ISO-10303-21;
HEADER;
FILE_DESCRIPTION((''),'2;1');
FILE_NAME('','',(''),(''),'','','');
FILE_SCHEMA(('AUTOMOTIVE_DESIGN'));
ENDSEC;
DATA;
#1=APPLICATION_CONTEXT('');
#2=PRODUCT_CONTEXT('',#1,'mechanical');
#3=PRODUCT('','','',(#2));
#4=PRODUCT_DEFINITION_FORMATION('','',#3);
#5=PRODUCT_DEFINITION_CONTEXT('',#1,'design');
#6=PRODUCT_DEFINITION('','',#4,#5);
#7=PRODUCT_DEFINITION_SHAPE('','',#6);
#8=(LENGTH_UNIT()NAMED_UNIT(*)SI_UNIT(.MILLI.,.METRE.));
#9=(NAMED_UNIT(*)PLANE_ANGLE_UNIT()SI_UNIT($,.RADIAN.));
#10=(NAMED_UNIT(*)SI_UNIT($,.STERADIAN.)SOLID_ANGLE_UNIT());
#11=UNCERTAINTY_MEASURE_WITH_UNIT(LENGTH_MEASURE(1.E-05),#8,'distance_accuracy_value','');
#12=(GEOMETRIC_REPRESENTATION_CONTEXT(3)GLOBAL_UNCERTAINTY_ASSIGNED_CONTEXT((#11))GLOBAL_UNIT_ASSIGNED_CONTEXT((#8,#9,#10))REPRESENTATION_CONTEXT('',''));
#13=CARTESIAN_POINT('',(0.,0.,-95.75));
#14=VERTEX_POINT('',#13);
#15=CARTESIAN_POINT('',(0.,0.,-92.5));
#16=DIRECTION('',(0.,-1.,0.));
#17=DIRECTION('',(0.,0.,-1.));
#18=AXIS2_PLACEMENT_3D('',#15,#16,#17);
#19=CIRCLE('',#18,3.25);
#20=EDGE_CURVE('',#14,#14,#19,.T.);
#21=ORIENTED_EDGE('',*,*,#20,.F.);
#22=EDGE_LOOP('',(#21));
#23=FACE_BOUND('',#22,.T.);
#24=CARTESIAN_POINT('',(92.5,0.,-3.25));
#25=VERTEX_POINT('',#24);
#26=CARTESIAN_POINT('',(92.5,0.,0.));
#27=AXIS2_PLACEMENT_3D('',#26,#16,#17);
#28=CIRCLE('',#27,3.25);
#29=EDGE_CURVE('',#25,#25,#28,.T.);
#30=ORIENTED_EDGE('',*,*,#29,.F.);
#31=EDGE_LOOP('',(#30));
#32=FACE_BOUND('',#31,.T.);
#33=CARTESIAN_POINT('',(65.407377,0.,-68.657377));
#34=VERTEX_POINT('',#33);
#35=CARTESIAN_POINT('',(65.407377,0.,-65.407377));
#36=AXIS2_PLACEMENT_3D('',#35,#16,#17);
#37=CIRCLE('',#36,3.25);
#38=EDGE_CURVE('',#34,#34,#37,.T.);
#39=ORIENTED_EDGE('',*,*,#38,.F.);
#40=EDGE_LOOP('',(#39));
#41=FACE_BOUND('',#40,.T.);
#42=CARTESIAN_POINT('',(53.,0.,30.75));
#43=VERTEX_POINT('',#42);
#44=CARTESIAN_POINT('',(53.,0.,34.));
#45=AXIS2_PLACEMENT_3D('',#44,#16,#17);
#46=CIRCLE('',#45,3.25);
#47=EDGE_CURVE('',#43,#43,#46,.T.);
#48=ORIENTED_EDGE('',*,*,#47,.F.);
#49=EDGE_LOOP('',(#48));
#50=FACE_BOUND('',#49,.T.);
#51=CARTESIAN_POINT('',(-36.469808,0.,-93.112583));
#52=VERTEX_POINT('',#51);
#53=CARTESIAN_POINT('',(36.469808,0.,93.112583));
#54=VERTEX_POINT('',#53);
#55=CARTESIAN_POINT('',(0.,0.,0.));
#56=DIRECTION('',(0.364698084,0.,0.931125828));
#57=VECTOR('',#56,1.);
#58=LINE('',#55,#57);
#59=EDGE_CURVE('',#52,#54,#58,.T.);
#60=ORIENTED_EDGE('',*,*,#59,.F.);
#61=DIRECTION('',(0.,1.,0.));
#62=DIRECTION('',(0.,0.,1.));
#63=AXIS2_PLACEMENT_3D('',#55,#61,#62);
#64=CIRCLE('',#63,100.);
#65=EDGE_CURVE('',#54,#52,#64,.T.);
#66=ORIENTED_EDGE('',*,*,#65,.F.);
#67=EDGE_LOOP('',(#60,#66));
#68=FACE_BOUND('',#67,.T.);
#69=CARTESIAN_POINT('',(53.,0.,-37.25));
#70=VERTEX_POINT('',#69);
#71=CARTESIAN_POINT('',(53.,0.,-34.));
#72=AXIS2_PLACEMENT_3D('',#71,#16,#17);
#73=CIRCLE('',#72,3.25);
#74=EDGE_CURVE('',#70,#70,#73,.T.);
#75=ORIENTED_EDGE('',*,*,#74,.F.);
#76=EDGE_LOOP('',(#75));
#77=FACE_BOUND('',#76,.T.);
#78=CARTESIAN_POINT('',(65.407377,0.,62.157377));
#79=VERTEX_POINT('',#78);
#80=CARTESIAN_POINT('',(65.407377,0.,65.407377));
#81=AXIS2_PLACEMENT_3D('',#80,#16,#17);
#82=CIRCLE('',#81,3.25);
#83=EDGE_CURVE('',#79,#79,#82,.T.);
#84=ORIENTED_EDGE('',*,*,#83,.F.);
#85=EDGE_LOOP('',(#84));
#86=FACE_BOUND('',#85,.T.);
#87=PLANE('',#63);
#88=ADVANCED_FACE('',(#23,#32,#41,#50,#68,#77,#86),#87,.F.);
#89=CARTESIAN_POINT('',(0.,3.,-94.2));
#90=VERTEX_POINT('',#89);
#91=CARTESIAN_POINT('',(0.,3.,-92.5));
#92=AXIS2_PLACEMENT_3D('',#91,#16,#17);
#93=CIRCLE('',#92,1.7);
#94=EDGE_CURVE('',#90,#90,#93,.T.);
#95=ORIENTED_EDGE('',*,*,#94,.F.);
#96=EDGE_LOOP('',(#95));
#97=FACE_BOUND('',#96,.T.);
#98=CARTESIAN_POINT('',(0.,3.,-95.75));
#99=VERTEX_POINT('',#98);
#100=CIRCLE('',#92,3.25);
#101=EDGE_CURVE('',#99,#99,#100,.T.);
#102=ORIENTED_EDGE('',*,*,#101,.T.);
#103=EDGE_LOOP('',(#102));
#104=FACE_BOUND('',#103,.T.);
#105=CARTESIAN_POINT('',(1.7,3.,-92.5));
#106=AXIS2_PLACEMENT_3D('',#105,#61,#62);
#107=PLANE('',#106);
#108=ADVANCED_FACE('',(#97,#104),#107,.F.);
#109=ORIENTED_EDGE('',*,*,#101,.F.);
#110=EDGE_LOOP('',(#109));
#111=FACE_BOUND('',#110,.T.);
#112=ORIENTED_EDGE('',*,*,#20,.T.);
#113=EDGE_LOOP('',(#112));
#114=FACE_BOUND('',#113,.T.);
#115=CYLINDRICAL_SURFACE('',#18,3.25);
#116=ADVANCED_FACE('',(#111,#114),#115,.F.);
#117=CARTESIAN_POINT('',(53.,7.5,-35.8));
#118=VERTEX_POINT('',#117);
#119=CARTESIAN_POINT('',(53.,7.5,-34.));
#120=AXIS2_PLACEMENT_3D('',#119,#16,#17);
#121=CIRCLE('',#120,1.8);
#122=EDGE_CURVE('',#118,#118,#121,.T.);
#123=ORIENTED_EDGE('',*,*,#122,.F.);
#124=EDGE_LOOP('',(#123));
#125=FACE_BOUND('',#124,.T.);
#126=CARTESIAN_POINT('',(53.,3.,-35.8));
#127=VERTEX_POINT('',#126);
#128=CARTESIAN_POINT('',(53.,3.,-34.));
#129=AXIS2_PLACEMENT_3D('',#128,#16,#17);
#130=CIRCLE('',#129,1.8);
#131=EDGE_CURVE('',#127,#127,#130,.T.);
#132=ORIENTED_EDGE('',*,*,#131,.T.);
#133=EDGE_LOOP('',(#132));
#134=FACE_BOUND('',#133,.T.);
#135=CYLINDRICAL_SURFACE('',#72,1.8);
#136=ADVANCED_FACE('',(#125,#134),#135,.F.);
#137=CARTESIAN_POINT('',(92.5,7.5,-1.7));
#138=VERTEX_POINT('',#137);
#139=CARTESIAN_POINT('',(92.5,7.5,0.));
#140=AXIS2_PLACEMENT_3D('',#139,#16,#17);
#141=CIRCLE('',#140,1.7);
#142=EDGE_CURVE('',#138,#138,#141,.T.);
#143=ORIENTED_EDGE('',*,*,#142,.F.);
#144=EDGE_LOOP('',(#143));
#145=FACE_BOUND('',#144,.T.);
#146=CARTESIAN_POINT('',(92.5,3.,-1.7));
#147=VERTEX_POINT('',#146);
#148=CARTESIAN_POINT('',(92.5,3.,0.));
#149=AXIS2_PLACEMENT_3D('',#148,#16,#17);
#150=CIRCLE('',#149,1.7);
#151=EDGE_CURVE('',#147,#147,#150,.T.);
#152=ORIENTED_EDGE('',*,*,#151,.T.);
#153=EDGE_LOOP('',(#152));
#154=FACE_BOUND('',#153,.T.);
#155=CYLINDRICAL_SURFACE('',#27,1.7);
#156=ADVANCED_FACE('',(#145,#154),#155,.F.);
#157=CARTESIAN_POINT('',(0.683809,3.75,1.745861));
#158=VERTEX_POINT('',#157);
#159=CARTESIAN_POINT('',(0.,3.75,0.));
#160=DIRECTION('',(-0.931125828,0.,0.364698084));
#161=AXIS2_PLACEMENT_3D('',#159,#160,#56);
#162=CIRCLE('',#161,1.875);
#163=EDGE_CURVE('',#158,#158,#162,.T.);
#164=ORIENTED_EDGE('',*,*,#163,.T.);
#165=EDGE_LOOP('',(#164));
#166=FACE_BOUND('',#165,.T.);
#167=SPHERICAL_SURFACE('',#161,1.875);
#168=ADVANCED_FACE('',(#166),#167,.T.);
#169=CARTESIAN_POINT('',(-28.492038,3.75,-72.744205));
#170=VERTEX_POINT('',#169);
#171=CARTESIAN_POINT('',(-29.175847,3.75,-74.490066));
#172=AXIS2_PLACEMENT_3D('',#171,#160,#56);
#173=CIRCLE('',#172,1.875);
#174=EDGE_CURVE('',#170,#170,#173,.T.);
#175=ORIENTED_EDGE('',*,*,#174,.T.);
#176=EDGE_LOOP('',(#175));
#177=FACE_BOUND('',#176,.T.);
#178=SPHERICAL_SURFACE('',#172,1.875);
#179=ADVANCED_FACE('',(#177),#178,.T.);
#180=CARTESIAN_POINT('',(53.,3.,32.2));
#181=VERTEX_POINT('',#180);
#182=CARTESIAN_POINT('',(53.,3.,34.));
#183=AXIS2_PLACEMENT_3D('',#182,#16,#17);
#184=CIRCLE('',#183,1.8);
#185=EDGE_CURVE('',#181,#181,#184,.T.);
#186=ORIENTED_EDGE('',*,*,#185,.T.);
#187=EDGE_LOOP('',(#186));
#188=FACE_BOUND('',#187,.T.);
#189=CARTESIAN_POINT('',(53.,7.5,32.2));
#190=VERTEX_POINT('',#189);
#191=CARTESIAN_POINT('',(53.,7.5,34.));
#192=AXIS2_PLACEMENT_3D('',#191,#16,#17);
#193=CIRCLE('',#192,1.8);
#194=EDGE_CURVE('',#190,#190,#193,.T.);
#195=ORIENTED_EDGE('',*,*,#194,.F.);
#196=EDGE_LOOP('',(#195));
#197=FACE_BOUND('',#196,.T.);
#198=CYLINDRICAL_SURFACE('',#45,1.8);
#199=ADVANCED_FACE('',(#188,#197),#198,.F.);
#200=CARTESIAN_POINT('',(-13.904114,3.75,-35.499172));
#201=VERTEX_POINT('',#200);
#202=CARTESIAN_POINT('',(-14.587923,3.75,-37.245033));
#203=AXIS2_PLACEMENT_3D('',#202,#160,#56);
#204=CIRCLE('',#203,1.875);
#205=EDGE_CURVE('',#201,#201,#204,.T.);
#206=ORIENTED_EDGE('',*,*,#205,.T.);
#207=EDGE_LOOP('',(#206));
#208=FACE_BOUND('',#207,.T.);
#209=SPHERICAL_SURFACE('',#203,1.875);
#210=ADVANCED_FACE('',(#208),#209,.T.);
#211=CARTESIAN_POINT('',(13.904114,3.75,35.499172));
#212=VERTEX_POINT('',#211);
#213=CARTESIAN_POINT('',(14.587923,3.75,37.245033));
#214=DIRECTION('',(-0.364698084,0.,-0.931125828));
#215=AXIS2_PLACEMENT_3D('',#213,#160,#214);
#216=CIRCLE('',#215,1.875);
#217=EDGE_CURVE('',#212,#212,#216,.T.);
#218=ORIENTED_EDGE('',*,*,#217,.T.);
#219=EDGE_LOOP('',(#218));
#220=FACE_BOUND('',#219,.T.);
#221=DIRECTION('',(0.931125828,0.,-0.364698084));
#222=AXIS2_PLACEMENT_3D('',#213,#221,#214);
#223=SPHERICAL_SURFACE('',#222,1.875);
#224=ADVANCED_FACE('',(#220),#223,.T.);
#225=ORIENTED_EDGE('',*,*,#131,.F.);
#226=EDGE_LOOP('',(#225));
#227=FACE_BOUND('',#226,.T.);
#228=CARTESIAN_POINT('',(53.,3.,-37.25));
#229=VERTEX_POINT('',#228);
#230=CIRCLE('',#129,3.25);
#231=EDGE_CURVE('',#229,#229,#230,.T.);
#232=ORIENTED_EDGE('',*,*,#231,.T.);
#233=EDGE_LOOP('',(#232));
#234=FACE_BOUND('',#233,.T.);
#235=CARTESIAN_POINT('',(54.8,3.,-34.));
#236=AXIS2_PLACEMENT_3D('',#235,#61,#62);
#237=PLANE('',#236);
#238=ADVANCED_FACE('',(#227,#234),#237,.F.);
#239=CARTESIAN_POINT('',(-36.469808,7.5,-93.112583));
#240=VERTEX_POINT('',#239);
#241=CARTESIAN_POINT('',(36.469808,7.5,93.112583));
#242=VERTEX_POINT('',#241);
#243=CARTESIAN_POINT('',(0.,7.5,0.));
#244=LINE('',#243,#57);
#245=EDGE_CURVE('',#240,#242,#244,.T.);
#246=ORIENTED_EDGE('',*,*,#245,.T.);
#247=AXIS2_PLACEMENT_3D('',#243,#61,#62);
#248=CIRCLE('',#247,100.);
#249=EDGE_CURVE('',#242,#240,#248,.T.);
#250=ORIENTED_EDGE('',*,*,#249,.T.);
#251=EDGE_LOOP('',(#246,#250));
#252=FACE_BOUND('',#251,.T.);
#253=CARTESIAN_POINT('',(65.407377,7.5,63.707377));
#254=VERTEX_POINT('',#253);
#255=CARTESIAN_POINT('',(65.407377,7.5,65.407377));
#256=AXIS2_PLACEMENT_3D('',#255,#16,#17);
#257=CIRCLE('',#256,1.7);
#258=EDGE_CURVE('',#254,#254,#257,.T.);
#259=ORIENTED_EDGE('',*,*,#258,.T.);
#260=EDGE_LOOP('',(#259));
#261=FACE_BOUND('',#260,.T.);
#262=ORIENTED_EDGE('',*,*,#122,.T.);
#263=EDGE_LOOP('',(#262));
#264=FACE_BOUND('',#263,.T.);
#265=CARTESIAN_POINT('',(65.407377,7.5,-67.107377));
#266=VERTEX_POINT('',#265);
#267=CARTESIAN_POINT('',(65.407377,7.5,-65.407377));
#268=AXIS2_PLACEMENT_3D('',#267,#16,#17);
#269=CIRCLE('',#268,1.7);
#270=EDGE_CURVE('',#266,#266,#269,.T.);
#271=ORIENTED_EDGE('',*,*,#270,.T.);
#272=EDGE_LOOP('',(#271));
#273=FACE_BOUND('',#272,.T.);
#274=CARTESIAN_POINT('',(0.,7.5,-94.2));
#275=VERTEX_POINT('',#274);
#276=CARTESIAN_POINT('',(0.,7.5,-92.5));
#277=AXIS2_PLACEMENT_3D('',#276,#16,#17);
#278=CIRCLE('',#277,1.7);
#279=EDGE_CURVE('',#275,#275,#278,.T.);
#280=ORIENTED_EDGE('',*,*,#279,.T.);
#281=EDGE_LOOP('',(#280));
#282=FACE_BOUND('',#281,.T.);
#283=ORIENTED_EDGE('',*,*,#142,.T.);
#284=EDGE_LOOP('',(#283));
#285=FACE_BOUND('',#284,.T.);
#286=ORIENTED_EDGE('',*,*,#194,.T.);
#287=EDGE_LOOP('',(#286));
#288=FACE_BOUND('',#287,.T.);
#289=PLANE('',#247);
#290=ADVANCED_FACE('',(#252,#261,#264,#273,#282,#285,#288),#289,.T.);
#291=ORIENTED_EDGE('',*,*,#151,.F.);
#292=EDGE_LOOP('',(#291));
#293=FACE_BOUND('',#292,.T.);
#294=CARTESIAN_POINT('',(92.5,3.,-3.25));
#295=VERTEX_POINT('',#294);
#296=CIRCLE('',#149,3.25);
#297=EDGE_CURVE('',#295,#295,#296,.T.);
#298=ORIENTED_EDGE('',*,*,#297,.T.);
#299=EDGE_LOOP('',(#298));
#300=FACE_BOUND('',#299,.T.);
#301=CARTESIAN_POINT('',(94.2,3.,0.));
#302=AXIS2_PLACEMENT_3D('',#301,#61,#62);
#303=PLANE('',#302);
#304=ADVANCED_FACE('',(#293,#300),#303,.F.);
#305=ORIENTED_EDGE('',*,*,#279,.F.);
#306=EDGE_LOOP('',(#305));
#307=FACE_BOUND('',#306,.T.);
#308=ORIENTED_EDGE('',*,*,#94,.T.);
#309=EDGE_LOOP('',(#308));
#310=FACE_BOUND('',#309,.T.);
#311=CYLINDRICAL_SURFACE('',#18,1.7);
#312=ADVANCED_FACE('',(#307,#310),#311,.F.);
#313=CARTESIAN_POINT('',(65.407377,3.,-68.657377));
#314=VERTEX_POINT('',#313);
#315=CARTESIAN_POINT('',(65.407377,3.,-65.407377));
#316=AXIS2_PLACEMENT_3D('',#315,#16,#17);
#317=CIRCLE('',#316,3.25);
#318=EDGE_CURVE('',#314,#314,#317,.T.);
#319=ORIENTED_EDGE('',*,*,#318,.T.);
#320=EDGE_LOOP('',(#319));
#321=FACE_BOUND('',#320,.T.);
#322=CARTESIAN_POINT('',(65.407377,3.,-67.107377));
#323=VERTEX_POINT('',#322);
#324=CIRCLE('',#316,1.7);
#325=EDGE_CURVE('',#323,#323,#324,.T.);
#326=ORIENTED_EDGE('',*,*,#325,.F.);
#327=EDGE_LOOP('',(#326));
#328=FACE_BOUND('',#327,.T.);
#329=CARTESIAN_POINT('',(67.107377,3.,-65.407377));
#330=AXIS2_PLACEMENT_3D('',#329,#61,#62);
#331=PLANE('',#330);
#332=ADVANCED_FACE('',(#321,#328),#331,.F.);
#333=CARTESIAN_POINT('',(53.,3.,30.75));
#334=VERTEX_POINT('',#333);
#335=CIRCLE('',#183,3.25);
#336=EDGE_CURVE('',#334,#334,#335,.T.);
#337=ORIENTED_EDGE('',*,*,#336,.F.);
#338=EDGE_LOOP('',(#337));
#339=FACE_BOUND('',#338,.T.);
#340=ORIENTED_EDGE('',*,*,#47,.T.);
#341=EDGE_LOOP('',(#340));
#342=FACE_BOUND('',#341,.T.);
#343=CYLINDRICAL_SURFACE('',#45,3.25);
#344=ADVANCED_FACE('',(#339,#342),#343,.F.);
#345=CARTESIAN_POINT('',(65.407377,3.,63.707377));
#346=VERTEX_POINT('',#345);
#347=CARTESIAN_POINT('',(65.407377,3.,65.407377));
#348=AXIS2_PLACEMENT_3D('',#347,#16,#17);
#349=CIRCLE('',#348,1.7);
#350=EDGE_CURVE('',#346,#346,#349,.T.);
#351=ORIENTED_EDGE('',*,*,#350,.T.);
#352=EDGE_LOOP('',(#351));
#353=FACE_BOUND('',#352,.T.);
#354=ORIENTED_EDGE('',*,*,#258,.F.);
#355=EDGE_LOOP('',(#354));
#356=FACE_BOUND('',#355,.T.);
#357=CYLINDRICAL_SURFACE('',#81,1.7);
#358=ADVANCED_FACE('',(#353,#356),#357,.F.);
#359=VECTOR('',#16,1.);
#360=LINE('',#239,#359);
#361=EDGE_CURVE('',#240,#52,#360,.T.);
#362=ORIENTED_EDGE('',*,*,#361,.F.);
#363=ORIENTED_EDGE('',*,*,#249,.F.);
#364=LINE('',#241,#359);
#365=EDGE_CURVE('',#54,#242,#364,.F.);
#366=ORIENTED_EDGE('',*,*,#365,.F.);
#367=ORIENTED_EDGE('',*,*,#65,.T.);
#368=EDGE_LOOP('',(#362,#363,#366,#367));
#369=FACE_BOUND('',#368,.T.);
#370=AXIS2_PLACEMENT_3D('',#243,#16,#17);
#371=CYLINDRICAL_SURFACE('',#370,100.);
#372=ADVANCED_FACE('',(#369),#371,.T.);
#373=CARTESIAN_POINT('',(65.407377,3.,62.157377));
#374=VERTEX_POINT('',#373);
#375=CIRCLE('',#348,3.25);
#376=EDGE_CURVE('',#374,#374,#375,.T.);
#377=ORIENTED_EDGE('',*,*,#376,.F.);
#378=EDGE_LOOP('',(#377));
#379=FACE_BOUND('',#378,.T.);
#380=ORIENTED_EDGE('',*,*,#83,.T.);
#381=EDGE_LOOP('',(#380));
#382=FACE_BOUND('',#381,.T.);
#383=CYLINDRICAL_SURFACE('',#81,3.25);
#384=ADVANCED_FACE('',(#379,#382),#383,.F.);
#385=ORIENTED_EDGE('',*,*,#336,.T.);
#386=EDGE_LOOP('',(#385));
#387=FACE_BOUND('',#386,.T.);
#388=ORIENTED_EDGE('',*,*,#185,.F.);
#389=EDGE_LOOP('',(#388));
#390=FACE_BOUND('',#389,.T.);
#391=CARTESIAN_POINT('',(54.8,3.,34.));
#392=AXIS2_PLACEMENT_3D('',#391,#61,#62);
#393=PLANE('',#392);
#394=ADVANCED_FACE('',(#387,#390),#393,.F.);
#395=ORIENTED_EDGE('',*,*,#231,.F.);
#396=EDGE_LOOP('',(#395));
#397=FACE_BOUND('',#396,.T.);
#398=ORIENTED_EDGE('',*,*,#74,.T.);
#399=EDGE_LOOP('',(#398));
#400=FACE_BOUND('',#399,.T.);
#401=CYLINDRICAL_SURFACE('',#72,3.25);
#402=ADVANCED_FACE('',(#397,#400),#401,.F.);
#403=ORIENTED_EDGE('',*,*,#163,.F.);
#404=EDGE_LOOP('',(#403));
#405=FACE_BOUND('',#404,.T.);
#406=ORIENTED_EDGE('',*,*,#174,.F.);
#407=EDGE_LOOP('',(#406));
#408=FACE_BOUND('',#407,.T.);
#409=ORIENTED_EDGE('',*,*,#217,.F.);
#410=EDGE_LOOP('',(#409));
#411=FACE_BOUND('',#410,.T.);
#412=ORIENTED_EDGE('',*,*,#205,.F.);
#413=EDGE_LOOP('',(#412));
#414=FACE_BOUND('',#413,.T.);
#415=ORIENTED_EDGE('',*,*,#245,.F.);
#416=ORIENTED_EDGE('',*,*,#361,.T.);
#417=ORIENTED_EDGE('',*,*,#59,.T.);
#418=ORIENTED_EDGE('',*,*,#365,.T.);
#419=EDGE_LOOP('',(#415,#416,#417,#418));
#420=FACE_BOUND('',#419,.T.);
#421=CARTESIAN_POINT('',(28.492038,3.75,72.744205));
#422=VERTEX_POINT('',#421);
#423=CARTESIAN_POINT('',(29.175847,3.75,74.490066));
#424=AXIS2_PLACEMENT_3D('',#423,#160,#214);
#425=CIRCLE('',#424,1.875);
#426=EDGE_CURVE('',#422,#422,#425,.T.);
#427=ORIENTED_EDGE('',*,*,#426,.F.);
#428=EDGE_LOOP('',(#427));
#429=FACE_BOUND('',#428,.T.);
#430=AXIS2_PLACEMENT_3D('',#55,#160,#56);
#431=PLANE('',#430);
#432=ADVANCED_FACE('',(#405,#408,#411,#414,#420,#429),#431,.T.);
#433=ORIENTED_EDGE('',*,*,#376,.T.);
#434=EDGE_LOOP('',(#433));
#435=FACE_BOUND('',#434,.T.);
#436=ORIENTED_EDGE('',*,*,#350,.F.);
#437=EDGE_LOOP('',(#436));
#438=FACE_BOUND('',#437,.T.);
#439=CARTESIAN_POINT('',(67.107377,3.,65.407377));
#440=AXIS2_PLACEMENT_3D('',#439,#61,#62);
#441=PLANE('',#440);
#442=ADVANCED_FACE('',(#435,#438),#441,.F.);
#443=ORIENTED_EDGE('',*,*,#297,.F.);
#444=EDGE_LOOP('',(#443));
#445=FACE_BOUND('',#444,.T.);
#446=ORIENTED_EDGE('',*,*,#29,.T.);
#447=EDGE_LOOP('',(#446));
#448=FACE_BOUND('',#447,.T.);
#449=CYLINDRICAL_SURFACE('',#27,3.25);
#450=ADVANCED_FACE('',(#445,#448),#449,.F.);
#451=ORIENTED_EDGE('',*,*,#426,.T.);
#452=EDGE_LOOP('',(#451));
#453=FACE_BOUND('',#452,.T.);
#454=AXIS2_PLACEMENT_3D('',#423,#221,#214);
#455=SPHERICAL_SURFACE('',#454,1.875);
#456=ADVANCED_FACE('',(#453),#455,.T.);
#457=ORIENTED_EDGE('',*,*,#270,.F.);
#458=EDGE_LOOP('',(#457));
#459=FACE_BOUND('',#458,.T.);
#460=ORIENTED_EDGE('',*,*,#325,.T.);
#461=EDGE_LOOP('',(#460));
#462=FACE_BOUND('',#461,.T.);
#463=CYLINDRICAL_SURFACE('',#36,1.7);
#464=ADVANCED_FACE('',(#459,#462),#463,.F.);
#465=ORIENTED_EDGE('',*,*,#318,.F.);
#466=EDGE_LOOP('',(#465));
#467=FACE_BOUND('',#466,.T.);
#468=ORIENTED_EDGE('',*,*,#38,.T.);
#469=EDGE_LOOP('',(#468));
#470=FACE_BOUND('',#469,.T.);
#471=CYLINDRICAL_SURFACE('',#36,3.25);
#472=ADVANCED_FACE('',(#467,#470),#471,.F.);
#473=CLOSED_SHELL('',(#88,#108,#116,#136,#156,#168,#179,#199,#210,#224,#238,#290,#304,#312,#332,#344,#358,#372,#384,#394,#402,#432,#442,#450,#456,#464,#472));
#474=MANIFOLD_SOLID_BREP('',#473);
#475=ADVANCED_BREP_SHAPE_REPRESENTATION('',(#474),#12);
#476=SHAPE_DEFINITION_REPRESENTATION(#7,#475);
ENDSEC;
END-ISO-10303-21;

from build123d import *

# Parameters (mm, degrees)
SKETCH1_R                      = 100
BOSS_EXTRUDE1_DEPTH            = 7.5
CBORE_FOR_M3_SHCS1_D           = 3.4
CBORE_FOR_M3_SHCS1_DEPTH       = 7.5
CBORE_FOR_M3_SHCS1_CBORE_D     = 6.5
CBORE_FOR_M3_SHCS1_CBORE_DEPTH = 3
CBORE_FOR_M3_SHCS1_TIP         = 1.021463052
CBORE_FOR_M3_SHCS2_D           = 3.6
CBORE_FOR_M3_SHCS2_DEPTH       = 7.5
CBORE_FOR_M3_SHCS2_CBORE_D     = 6.5
CBORE_FOR_M3_SHCS2_CBORE_DEPTH = 3
CBORE_FOR_M3_SHCS2_TIP         = 1.081549114
SKETCH9_W                      = 276.839915284
SKETCH9_H                      = 86.454597136
CUT_EXTRUDE1_DEPTH             = 142.620090383
SKETCH11_R                     = 1.875
BOSS_EXTRUDE3_DEPTH            = 1.875
FILLET1_R                      = 1.875


with BuildPart() as part:
    # Sketch1 → Boss-Extrude1 (new body)
    with BuildSketch(Plane(origin=(0, 0, 0), x_dir=(1, 0, 0), z_dir=(0, 1, 0))):
        with Locations(Location((0, 0, 0), (0, 0, 270))):
            Circle(SKETCH1_R)
    extrude(amount=BOSS_EXTRUDE1_DEPTH)

    # CBORE for M3 SHCS1
    with Locations(Plane(origin=(0, 0, 0), x_dir=(-1, 0, 0), z_dir=(0, -1, 0))):
        with Locations((0, -92.5), (-65.40737726, -65.40737726), (-92.5, 0), (-65.40737726, 65.40737726), (0, 92.5), (65.40737726, 65.40737726), (92.5, 0), (65.40737726, -65.40737726)):
            CounterBoreHole(CBORE_FOR_M3_SHCS1_D / 2, CBORE_FOR_M3_SHCS1_CBORE_D / 2, CBORE_FOR_M3_SHCS1_CBORE_DEPTH, depth=CBORE_FOR_M3_SHCS1_DEPTH)
            with Locations((0, 0, -(CBORE_FOR_M3_SHCS1_DEPTH + CBORE_FOR_M3_SHCS1_TIP / 2))):  # 118° drill point
                Cone(0, CBORE_FOR_M3_SHCS1_D / 2, CBORE_FOR_M3_SHCS1_TIP, mode=Mode.SUBTRACT)

    # CBORE for M3 SHCS2
    with Locations(Plane(origin=(0, 0, 0), x_dir=(-1, 0, 0), z_dir=(0, -1, 0))):
        with Locations((-53, 34), (53, 34), (53, -34), (-53, -34)):
            CounterBoreHole(CBORE_FOR_M3_SHCS2_D / 2, CBORE_FOR_M3_SHCS2_CBORE_D / 2, CBORE_FOR_M3_SHCS2_CBORE_DEPTH, depth=CBORE_FOR_M3_SHCS2_DEPTH)
            with Locations((0, 0, -(CBORE_FOR_M3_SHCS2_DEPTH + CBORE_FOR_M3_SHCS2_TIP / 2))):  # 118° drill point
                Cone(0, CBORE_FOR_M3_SHCS2_D / 2, CBORE_FOR_M3_SHCS2_TIP, mode=Mode.SUBTRACT)

    # Sketch9 → Cut-Extrude1 (cut, through all)
    with BuildSketch(Plane(origin=(0, 0, 0), x_dir=(0.3646980843717534, 0, 0.9311258278318637), z_dir=(-0.9311258278318637, 0, 0.3646980843717534))):
        with Locations((-1.022117504, -7.168579764)):
            Rectangle(SKETCH9_W, SKETCH9_H)
    extrude(amount=CUT_EXTRUDE1_DEPTH, mode=Mode.SUBTRACT)

    # Sketch11 → Boss-Extrude3 (add)
    with BuildSketch(Plane(origin=(0, 0, 0), x_dir=(0.3646980843717534, 0, 0.9311258278318637), z_dir=(-0.9311258278318637, 0, 0.3646980843717534))):
        with Locations(Location((0, 3.75, 0), (0, 0, 180))):
            Circle(SKETCH11_R)
        with Locations(Location((-40, 3.75, 0), (0, 0, 180))):
            Circle(SKETCH11_R)
        with Locations(Location((-80, 3.75, 0), (0, 0, 180))):
            Circle(SKETCH11_R)
        with Locations(Location((80, 3.75, 0), (0, 0, 180))):
            Circle(SKETCH11_R)
        with Locations(Location((40, 3.75, 0), (0, 0, 180))):
            Circle(SKETCH11_R)
    extrude(amount=BOSS_EXTRUDE3_DEPTH)

    # Fillet1
    fillet1_edges = [part.edges().sort_by_distance(p)[0] for p in [
        (-1.062052019, 3.75, 2.429669835),
        (-15.649975394, 3.75, -34.815363278),
        (-30.237898769, 3.75, -72.060396391),
        (28.113794731, 3.75, 76.919736062),
        (13.525871356, 3.75, 39.674702949),
    ]]
    fillet(fillet1_edges, radius=FILLET1_R - 0.0001)  # a hair under: the kernel refuses the full size


solid = part.part
